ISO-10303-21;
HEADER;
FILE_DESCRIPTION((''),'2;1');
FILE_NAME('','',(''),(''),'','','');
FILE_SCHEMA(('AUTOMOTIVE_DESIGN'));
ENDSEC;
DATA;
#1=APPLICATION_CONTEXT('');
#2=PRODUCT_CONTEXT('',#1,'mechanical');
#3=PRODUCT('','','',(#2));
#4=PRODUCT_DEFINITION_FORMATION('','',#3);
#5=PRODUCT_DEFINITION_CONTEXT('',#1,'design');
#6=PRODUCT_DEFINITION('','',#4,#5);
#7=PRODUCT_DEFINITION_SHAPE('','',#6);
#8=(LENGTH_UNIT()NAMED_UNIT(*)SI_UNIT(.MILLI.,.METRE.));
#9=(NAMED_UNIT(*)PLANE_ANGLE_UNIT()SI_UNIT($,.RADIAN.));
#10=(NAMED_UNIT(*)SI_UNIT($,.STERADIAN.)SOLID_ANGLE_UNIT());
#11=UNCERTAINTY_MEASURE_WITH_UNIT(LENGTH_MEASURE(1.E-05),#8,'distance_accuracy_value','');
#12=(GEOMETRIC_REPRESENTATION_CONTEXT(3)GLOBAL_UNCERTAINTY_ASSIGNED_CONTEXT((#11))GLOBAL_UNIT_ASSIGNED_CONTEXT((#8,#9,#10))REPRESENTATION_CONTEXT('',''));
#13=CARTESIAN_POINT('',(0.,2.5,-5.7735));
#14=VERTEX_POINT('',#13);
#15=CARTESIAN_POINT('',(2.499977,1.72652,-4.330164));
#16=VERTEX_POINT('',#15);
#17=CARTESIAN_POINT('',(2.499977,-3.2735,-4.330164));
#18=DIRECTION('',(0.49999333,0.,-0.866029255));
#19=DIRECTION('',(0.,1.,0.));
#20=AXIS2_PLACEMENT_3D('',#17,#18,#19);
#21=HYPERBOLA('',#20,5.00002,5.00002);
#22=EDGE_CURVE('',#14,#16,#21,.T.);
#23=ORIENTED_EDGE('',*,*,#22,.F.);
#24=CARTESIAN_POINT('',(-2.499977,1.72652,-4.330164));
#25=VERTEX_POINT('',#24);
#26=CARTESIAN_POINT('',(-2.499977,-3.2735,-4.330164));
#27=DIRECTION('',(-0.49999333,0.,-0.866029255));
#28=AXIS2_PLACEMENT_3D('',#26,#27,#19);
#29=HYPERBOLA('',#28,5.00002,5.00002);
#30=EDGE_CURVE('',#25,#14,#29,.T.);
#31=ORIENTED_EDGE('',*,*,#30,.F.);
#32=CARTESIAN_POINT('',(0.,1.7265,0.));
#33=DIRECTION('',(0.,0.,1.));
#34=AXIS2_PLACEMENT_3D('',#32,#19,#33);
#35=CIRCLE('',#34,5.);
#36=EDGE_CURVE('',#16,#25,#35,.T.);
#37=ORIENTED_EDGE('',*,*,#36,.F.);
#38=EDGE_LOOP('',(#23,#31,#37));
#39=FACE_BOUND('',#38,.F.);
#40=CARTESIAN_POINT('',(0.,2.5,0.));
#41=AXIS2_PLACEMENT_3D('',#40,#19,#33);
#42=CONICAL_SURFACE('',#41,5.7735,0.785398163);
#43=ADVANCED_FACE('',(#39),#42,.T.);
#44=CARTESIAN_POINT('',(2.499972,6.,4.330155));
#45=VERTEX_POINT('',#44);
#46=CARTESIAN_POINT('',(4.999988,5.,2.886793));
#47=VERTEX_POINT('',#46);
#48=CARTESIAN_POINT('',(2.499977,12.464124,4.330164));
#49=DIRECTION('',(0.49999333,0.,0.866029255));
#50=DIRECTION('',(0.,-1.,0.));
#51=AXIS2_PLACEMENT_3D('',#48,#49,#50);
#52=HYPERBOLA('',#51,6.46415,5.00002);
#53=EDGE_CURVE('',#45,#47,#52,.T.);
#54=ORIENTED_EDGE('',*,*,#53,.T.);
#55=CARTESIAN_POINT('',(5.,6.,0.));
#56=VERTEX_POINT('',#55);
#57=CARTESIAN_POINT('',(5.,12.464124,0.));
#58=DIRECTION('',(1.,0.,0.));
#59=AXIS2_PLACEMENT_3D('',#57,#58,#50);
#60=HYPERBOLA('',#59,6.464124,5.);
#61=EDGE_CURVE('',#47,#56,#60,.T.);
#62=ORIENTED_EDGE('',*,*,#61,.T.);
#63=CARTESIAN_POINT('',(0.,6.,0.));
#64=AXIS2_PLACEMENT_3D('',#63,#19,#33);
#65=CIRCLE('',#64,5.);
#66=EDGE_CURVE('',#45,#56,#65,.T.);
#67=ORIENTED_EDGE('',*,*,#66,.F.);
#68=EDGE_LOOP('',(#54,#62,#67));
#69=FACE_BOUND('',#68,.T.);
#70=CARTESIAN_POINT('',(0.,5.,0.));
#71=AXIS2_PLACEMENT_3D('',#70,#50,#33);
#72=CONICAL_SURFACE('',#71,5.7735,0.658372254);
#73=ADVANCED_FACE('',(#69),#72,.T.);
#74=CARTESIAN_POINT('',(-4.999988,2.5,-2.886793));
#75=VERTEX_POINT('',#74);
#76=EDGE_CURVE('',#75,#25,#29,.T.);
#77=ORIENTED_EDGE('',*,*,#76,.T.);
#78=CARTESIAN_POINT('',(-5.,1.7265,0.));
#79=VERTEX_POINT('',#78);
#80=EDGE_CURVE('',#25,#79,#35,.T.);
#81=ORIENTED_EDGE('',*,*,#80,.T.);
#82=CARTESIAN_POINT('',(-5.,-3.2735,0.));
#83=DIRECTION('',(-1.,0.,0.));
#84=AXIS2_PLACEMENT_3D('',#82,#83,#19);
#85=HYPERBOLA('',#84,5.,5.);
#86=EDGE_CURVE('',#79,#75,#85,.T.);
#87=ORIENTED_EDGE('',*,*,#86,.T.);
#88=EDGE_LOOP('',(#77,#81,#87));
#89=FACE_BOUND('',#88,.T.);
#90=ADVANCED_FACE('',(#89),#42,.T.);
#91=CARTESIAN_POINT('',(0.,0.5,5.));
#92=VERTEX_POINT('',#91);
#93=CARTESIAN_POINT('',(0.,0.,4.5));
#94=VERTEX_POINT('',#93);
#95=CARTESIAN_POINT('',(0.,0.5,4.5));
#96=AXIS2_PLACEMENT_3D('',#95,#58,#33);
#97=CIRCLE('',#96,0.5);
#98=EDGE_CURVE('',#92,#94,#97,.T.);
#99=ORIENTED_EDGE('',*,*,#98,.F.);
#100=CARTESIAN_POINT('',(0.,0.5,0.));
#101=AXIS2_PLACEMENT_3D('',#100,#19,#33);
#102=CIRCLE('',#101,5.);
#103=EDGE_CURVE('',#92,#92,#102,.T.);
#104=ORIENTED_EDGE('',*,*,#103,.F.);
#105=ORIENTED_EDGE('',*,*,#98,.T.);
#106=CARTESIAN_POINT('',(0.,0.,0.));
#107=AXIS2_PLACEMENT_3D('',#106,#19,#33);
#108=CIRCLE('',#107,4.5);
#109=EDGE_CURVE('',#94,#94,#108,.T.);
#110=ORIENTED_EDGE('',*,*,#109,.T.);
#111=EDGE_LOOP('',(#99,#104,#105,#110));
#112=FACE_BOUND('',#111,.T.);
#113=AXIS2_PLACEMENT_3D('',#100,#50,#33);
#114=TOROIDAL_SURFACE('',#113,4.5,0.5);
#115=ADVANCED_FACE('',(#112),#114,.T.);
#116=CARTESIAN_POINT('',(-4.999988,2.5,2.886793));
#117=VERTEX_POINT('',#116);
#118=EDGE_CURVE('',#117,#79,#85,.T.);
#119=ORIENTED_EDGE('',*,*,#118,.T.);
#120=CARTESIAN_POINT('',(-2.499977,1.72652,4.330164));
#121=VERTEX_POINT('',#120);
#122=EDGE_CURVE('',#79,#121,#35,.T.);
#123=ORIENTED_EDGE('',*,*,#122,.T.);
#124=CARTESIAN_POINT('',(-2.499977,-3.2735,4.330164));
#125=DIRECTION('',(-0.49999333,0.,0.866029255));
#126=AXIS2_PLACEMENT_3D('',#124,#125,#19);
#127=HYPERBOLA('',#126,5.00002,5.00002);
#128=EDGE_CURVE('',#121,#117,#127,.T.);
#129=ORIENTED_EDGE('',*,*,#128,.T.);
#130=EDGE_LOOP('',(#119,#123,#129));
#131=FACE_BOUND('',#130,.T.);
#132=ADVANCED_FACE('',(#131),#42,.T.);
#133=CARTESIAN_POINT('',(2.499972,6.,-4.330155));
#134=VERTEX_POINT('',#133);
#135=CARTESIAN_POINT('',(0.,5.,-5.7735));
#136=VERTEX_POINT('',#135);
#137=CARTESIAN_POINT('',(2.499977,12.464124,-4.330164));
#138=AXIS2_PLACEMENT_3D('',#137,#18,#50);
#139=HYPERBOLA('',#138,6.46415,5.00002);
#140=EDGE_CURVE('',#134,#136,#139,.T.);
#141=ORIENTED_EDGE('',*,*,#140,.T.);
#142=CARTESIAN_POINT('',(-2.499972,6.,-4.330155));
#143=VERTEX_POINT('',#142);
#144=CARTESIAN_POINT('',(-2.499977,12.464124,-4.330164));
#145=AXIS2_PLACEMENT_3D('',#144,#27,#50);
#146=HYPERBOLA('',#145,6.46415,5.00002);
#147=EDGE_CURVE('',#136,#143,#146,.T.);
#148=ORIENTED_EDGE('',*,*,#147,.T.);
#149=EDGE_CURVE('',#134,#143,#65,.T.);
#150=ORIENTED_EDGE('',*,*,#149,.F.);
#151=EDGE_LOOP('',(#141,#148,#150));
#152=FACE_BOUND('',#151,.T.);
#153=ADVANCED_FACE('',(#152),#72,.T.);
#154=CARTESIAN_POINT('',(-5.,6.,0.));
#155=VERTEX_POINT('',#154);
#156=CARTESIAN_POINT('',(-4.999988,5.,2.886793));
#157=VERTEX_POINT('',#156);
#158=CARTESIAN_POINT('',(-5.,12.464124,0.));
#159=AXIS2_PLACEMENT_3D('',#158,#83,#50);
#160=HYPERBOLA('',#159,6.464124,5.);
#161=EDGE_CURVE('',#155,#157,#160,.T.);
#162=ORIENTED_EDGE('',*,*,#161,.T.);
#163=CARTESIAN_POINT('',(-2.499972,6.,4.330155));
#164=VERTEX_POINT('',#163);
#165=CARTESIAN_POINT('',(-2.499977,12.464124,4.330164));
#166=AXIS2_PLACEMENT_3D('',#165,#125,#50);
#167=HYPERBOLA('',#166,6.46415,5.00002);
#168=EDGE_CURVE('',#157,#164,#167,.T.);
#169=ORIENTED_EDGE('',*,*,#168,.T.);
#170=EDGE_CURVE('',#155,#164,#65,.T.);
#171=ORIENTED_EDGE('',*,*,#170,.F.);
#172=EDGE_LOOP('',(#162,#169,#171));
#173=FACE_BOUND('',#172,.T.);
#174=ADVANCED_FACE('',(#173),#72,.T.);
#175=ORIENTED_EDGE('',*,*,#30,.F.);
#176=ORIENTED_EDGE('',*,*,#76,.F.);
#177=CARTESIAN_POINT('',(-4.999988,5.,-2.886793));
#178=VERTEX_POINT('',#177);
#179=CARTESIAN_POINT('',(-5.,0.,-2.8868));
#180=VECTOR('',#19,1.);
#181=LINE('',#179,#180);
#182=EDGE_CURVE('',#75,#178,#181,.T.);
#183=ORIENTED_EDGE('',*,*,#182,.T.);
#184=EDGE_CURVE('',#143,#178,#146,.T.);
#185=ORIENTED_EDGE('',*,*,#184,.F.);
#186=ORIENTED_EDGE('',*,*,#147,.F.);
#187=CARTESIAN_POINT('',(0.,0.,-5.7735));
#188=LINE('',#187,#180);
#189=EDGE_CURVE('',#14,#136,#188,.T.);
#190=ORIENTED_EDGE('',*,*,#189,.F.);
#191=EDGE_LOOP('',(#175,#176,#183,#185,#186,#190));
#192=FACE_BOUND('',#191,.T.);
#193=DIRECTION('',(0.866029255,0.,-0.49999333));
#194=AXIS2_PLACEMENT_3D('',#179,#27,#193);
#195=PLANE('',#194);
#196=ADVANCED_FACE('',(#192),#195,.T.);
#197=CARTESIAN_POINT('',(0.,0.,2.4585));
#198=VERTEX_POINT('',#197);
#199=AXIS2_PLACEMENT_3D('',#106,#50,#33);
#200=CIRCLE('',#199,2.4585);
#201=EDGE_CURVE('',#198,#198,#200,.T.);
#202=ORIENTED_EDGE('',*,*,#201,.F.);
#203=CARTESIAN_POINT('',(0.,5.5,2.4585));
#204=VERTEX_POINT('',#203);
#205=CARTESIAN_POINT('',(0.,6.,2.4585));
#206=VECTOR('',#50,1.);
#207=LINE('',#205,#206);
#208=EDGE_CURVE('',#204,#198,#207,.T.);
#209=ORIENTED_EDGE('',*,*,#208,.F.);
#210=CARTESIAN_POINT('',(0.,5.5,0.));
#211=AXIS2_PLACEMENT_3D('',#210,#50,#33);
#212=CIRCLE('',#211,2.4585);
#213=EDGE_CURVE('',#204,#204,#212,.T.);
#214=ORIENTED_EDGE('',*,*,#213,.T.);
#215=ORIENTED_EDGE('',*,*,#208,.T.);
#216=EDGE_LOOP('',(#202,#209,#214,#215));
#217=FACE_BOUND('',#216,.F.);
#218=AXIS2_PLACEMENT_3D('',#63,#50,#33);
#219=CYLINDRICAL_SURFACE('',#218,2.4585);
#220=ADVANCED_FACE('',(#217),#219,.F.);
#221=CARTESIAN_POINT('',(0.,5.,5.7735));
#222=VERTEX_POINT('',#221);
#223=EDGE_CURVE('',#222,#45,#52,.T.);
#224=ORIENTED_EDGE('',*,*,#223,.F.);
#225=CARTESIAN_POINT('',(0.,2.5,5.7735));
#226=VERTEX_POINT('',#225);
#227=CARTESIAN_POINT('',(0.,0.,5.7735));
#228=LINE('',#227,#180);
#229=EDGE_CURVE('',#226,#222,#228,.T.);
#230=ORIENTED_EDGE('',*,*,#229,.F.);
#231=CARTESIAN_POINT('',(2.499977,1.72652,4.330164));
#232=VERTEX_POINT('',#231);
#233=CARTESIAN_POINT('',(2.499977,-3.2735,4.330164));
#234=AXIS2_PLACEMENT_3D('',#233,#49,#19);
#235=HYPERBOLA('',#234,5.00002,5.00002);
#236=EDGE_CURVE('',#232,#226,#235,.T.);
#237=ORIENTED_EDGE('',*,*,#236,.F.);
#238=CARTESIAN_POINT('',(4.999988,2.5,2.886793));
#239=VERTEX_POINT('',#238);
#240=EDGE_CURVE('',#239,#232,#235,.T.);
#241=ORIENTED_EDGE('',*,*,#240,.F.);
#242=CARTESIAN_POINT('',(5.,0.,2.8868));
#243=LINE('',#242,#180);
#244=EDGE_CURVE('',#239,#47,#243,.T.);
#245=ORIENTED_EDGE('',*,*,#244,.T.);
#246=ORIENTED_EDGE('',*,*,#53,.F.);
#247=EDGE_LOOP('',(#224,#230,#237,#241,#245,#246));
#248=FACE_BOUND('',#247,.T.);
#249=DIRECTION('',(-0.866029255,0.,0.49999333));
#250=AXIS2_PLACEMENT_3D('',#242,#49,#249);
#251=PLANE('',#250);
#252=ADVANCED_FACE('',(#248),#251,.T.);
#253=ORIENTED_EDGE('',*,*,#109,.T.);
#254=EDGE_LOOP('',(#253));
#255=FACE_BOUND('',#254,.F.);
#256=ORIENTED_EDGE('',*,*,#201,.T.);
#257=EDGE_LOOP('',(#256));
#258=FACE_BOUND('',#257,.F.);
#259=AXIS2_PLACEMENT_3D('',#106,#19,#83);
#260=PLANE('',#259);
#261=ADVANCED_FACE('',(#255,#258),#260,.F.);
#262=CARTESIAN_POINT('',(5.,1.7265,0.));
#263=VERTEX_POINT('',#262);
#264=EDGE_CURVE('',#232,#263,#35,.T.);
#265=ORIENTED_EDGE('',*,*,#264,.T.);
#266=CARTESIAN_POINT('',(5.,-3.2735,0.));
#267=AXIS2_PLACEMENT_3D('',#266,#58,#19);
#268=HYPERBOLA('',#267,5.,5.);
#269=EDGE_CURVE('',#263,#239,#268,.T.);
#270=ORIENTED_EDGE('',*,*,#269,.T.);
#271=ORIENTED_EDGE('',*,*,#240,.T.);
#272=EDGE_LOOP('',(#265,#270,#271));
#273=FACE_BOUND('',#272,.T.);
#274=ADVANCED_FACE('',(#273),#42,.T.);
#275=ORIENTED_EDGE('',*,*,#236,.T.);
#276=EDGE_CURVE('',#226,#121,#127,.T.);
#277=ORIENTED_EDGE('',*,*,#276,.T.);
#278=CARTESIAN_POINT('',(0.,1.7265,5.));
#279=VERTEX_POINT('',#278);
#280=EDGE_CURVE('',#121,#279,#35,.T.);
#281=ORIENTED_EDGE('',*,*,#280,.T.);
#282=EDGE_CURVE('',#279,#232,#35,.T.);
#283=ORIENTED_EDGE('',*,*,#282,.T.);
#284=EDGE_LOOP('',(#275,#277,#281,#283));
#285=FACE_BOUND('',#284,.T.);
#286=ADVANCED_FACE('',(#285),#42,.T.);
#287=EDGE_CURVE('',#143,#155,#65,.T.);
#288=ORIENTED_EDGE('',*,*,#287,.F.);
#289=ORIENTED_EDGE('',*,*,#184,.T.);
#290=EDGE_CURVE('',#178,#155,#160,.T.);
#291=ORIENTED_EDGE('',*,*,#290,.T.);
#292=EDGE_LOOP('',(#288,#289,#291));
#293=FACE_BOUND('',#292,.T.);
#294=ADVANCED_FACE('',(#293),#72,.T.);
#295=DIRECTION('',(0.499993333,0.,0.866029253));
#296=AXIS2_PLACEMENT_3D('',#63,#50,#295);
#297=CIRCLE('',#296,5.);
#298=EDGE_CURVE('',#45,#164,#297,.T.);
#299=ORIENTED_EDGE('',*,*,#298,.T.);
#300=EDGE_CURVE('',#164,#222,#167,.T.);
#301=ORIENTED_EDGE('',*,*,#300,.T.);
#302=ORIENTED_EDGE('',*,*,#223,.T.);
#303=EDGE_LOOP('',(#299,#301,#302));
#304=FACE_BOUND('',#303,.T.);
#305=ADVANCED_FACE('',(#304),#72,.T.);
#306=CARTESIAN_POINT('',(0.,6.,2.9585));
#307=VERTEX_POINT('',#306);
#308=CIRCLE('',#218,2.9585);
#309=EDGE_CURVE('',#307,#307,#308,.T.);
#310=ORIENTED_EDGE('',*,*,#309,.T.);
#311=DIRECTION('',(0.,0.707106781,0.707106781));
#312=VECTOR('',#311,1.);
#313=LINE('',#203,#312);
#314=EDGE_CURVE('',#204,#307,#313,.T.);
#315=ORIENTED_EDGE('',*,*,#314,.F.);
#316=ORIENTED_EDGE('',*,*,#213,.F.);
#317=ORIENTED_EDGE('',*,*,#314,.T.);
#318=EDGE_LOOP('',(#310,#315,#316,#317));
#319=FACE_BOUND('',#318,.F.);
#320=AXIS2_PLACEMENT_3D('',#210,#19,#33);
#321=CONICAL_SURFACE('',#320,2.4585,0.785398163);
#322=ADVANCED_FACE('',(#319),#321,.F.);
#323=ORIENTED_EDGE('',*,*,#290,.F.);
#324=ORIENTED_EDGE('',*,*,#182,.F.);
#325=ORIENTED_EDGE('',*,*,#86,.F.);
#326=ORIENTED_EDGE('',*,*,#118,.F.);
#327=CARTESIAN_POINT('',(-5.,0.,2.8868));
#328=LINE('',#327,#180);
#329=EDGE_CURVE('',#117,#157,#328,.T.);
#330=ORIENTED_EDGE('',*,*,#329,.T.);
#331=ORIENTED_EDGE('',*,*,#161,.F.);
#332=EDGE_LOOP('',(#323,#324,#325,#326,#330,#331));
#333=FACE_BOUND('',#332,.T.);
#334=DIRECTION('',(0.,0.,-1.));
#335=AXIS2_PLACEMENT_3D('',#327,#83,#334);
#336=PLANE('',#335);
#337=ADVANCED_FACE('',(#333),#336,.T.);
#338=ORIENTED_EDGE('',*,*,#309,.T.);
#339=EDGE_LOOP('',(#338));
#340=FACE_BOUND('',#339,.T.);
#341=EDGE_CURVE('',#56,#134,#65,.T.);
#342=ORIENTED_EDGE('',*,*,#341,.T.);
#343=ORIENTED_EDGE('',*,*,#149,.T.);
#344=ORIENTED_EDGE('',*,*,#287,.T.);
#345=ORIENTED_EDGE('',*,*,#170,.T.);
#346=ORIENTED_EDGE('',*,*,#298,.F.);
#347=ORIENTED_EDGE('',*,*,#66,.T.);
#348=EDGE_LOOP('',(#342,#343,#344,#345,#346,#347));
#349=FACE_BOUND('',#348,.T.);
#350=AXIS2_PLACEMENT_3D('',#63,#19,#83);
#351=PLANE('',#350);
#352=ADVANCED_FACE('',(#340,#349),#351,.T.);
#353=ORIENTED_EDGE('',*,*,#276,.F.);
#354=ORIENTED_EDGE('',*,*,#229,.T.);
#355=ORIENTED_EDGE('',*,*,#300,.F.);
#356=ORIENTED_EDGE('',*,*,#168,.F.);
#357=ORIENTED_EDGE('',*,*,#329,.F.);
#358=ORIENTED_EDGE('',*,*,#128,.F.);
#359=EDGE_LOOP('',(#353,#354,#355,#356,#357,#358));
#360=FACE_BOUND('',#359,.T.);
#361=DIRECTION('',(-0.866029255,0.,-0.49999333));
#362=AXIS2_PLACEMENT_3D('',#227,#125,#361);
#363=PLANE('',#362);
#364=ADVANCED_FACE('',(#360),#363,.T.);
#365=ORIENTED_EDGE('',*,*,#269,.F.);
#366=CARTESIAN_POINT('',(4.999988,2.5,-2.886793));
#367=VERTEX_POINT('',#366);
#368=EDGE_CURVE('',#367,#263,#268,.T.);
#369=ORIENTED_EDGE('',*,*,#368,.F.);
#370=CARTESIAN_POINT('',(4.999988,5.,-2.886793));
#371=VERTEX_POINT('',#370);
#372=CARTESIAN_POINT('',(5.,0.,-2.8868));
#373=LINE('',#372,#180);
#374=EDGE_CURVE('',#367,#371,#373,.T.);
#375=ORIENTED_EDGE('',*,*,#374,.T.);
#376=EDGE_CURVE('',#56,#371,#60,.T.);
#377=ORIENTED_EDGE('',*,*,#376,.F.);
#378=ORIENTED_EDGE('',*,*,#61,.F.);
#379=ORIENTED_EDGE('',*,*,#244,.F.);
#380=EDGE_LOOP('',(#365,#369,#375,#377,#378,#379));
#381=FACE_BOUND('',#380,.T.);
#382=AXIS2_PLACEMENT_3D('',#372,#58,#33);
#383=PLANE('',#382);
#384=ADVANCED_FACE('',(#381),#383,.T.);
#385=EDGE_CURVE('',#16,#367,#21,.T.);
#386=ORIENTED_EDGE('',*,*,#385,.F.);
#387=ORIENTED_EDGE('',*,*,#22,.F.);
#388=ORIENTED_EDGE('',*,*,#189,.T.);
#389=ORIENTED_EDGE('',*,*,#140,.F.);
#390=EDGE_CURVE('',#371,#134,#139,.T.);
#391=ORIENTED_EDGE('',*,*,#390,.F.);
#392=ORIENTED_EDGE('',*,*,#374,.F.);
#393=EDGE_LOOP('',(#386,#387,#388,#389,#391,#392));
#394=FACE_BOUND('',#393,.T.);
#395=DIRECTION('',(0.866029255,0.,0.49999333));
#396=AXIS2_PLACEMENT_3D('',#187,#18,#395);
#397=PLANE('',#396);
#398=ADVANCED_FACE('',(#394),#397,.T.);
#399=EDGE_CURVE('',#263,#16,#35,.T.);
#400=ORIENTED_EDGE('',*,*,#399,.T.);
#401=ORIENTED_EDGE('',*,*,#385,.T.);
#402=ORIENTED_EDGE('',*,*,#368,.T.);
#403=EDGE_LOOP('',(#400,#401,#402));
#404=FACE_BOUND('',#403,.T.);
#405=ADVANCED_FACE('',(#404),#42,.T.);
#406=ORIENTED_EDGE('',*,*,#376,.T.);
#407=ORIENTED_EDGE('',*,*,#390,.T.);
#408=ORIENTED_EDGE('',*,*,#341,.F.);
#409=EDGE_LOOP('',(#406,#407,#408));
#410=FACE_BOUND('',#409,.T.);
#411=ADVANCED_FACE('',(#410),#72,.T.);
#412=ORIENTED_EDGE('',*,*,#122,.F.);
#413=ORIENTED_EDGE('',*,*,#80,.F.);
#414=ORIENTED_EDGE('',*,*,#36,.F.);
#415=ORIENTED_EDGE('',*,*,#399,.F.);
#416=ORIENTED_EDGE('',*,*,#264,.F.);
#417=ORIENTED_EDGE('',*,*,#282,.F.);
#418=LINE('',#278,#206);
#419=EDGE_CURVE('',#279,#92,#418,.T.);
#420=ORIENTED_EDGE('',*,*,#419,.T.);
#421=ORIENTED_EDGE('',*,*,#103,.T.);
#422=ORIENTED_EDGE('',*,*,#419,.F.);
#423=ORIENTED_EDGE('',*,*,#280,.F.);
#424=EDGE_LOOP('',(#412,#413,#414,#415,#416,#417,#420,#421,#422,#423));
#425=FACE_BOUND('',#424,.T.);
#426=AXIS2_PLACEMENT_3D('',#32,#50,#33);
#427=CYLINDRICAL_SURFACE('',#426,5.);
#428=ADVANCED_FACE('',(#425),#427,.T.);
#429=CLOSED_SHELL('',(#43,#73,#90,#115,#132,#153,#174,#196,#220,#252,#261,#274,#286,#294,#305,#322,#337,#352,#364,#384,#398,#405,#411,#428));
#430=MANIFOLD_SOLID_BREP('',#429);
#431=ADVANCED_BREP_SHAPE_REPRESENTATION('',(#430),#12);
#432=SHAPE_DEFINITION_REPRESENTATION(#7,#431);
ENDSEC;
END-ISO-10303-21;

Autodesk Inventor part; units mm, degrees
ref_plane "YZ Plane" through (0, 0, 0) normal (1, 0, 0) x (0, 1, 0)
ref_plane "XZ Plane" through (0, 0, 0) normal (0, 1, 0) x (-1, 0, 0)
ref_plane "XY Plane" through (0, 0, 0) normal (0, 0, 1) x (1, 0, 0)
sketch "Sketch1" plane through (0, 0, 0) normal (0, 1, 0) x (-1, 0, 0)
  line L0 (5, 2.8868) -> (5, -2.8868)
  line L1 (5, -2.8868) -> (0, -5.7735)
  line L2 (0, -5.7735) -> (-5, -2.8868)
  line L3 (-5, -2.8868) -> (-5, 2.8868)
  line L4 (-5, 2.8868) -> (0, 5.7735)
  line L5 (0, 5.7735) -> (5, 2.8868)
  point P0 (0, 0)
  point P1 (0, 0)
  dimension "d0" = 10
extrude "Extrusion1" add sketch "Sketch1" along normal blind 6
sketch "Sketch2" plane through (0, 6, 0) normal (0, 1, 0) x (1, 0, 0)
  point P0 (0, 0)
  point P1 (0, 0)
hole "Hole1" at (0, 6, 0) direction (0, -1, 0) diameter 4.917 end through all thread size "M6x1" class "6H" standard "ISO Metric profile"
sketch "Sketch3" plane through (0, 0, 0) normal (1, 0, 0) x (0, 1, 0)
  line L0 (0, 0) -> (9.121, 0)
  line L1 (0, 5.7735) -> (6, 5.7735) projected
  line L2 (2.5, 5.7735) -> (1.7265, 5)
  line L3 (1.7265, 5) -> (0, 5)
  line L4 (0, 5) -> (0, 5.7735)
  line L5 (6, 5.7735) -> (6, 2.8868) projected
  dimension "d10" = 10
  dimension "d11" = 3.5
  dimension "d12" = 45
revolve "Revolution1" cut sketch "Sketch3" angle 360 about axis through (0, 0, 0) along (0, 1, 0)
fillet "Fillet1" radius 0.5 1 edges at (0, 0, -5)
sketch "Sketch4" plane through (0, 0, 0) normal (0, -1, 0) x (1, 0, 0)
  circle A0 centre (0, 0) radius 4.5 projected
  circle A1 centre (0, 0) radius 3.75
  dimension "d15" = 7.5
split_face "Split1"
sketch "Sketch5" plane through (0, 0, 0) normal (1, 0, 0) x (0, 1, 0)
  line L0 (0, 0) -> (10.6904, 0)
  line L1 (2.5, 5.7735) -> (6, 5.7735) projected
  line L2 (5, 5.7735) -> (6, 5)
  line L3 (6, 5) -> (6, 5.7735)
  line L4 (6, 5) -> (10.4328, 5)
  dimension "d16" = 1
  dimension "d17" = 10
revolve "Revolution2" cut sketch "Sketch5" angle 360 about axis through (0, 0, 0) along (0, 1, 0)
chamfer "Chamfer1" distance 0.5 angle 45 1 edges at (0, 6, -2.4585)
properties part number "M6 nyloc" material "Steel, Carbon"
